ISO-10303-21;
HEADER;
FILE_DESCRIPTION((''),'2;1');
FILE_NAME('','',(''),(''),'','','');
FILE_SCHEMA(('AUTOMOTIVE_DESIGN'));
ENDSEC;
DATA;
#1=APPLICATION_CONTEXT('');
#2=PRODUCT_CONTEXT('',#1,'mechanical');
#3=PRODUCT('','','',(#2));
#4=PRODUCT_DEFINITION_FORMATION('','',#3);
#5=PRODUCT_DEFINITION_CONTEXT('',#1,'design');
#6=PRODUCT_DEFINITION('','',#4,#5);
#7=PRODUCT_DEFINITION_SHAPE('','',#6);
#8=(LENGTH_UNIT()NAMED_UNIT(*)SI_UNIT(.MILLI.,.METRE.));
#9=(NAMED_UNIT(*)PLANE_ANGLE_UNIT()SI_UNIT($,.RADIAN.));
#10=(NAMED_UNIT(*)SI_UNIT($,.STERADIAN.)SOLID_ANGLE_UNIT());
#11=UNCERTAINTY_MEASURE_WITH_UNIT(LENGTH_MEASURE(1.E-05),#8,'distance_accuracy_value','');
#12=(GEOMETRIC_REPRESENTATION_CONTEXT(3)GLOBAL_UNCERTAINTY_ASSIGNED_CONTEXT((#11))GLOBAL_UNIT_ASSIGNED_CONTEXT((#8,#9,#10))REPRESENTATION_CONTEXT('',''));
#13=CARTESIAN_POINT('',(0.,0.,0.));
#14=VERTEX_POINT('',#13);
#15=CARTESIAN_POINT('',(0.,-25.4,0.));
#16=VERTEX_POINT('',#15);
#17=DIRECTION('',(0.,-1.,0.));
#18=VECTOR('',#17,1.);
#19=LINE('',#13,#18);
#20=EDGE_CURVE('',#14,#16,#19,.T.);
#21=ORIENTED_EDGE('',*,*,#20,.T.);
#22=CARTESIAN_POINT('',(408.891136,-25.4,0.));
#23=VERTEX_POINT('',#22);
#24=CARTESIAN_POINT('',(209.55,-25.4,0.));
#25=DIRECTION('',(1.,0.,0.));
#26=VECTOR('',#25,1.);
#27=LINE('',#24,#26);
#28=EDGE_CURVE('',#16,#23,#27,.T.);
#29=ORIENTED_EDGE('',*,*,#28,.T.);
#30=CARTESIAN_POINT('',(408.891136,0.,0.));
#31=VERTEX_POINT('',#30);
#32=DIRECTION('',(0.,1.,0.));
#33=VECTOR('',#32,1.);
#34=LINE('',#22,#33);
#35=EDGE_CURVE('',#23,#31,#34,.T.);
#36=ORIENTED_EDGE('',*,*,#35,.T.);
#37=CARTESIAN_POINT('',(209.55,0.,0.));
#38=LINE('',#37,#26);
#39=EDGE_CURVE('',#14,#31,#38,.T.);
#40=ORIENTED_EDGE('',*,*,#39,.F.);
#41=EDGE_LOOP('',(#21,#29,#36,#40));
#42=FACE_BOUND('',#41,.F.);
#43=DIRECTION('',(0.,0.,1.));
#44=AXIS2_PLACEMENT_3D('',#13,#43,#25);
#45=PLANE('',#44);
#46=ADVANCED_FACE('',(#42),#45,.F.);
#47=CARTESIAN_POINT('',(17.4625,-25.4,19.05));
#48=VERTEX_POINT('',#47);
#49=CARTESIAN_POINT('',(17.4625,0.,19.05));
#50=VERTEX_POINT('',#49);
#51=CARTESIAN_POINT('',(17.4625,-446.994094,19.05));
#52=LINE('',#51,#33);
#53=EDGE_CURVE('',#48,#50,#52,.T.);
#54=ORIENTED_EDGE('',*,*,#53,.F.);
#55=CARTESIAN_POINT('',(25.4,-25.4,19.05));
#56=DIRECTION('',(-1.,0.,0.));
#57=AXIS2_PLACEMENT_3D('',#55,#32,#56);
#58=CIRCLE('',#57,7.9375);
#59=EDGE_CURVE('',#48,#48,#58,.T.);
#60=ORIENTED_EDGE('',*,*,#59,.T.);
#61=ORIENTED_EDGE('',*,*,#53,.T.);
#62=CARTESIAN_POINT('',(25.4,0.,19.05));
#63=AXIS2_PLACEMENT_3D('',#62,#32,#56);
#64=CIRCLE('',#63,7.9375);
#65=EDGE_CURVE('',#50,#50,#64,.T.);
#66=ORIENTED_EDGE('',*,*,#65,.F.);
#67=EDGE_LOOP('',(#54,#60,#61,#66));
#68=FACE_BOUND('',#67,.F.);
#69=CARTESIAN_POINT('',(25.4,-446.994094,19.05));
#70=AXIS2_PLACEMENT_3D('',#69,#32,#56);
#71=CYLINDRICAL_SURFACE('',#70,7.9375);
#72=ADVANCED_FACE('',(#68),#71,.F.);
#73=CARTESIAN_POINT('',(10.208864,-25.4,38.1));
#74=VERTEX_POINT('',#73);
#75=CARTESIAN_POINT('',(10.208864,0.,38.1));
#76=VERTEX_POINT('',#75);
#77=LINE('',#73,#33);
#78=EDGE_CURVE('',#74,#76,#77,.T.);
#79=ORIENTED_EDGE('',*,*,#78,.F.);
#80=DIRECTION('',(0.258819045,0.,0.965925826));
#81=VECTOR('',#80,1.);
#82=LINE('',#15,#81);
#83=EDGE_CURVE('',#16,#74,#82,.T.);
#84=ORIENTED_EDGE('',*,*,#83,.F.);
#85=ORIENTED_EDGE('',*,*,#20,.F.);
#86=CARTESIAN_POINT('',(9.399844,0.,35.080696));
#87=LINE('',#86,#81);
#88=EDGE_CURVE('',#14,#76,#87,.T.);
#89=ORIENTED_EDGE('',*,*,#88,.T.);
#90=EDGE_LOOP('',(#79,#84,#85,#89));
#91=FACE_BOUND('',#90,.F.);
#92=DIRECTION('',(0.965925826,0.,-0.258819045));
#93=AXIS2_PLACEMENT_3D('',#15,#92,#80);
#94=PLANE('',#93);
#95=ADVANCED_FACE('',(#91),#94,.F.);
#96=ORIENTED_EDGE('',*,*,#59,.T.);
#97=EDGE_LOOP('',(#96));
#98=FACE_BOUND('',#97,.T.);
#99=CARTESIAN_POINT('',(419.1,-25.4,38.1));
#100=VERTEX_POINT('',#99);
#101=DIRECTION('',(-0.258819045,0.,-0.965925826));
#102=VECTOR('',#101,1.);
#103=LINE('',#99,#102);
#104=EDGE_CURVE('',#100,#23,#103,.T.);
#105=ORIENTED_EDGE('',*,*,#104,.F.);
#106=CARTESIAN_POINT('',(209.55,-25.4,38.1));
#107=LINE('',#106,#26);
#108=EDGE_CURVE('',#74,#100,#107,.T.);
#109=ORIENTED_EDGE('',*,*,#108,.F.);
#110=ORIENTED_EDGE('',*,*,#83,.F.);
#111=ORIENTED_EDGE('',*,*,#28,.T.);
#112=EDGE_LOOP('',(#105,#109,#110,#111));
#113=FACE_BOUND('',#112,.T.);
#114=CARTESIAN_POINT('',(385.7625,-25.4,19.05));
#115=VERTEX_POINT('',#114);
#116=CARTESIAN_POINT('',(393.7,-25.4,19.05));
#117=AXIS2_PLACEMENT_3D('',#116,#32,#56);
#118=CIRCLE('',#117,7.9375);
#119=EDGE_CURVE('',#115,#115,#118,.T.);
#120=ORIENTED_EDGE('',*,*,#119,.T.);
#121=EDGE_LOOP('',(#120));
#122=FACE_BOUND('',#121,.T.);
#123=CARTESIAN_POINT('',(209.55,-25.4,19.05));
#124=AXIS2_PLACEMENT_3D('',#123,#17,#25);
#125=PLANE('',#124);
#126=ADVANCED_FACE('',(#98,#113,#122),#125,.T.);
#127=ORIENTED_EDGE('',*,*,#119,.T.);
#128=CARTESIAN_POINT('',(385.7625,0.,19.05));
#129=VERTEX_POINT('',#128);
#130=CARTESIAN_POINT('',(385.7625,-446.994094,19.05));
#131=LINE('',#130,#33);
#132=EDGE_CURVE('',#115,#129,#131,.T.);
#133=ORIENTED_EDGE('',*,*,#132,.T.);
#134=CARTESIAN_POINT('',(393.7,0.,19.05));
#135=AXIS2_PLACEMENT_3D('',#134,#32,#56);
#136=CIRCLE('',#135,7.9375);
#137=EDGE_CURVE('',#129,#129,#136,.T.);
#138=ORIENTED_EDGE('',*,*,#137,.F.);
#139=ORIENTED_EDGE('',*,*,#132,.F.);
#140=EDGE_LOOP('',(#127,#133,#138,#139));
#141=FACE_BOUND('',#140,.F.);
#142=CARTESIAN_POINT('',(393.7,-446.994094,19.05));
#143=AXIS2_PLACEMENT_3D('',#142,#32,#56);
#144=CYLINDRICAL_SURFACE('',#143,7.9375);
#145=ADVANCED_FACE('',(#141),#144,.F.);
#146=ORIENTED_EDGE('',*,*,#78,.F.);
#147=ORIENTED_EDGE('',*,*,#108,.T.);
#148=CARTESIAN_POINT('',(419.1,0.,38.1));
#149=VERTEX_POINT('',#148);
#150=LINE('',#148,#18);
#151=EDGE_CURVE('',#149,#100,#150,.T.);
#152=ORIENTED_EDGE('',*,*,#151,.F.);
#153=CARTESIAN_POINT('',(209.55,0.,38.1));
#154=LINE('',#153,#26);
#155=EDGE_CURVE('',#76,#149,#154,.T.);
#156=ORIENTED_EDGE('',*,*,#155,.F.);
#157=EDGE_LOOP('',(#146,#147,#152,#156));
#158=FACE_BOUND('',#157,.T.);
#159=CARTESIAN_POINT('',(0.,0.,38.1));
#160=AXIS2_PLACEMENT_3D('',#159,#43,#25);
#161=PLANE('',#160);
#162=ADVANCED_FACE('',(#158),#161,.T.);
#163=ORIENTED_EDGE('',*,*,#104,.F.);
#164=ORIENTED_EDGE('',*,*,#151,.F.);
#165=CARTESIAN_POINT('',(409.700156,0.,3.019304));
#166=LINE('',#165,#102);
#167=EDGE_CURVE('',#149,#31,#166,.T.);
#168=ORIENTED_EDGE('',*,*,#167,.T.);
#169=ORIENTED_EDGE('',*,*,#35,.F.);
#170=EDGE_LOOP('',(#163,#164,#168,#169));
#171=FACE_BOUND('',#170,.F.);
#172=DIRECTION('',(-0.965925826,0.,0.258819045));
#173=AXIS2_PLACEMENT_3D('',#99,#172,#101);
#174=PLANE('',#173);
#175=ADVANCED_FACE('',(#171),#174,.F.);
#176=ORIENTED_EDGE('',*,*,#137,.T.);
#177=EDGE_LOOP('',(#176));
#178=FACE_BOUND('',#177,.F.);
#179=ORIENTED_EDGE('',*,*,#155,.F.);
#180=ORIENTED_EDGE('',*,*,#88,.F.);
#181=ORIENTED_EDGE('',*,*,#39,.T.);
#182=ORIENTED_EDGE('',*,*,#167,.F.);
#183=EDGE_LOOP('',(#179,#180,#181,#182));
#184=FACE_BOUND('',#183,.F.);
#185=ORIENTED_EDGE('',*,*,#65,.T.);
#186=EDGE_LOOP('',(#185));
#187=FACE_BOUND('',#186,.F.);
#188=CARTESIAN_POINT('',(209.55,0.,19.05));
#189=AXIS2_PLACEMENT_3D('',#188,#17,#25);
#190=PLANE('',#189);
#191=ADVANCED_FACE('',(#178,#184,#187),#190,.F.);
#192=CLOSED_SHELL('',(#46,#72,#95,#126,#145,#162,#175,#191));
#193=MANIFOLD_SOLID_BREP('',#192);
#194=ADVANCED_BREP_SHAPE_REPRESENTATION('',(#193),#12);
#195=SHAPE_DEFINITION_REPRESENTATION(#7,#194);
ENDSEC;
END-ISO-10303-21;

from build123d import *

# Parameters (mm, degrees)
F0_W     = 419.1
F0_H     = 38.1
F1_DEPTH = 25.4
F3_D     = 15.875
F5_DEPTH = 50.8
F7_DEPTH = 50.8


# Not quite as in the source:
# - a feature names something its author has since deleted; it is built from what else it names


with BuildPart() as f1:
    # F0 (on Front) → F1 (new body)
    with BuildSketch(Plane.XZ):
        with Locations((209.55, 19.05)):
            Rectangle(F0_W, F0_H)
    extrude(amount=F1_DEPTH)

    # F3 (through all)
    with Locations(Plane.XZ.offset(25.4)):
        with Locations((25.4, 19.05), (393.7, 19.05)):
            Hole(F3_D / 2)

    # F4 (on face) → F5 (cut)
    with BuildSketch(Plane.XZ.offset(25.4)):
        Polygon((0, 38.1), (0, 0), (10.2088642316, 38.1), align=None)
    extrude(amount=-F5_DEPTH, mode=Mode.SUBTRACT)

    # F6 (on face) → F7 (cut)
    with BuildSketch(Plane.XZ.offset(25.4)):
        Polygon((419.1, 0), (419.1, 38.1), (408.8911357684, 0), align=None)
    extrude(amount=-F7_DEPTH, mode=Mode.SUBTRACT)


solid = f1.part
